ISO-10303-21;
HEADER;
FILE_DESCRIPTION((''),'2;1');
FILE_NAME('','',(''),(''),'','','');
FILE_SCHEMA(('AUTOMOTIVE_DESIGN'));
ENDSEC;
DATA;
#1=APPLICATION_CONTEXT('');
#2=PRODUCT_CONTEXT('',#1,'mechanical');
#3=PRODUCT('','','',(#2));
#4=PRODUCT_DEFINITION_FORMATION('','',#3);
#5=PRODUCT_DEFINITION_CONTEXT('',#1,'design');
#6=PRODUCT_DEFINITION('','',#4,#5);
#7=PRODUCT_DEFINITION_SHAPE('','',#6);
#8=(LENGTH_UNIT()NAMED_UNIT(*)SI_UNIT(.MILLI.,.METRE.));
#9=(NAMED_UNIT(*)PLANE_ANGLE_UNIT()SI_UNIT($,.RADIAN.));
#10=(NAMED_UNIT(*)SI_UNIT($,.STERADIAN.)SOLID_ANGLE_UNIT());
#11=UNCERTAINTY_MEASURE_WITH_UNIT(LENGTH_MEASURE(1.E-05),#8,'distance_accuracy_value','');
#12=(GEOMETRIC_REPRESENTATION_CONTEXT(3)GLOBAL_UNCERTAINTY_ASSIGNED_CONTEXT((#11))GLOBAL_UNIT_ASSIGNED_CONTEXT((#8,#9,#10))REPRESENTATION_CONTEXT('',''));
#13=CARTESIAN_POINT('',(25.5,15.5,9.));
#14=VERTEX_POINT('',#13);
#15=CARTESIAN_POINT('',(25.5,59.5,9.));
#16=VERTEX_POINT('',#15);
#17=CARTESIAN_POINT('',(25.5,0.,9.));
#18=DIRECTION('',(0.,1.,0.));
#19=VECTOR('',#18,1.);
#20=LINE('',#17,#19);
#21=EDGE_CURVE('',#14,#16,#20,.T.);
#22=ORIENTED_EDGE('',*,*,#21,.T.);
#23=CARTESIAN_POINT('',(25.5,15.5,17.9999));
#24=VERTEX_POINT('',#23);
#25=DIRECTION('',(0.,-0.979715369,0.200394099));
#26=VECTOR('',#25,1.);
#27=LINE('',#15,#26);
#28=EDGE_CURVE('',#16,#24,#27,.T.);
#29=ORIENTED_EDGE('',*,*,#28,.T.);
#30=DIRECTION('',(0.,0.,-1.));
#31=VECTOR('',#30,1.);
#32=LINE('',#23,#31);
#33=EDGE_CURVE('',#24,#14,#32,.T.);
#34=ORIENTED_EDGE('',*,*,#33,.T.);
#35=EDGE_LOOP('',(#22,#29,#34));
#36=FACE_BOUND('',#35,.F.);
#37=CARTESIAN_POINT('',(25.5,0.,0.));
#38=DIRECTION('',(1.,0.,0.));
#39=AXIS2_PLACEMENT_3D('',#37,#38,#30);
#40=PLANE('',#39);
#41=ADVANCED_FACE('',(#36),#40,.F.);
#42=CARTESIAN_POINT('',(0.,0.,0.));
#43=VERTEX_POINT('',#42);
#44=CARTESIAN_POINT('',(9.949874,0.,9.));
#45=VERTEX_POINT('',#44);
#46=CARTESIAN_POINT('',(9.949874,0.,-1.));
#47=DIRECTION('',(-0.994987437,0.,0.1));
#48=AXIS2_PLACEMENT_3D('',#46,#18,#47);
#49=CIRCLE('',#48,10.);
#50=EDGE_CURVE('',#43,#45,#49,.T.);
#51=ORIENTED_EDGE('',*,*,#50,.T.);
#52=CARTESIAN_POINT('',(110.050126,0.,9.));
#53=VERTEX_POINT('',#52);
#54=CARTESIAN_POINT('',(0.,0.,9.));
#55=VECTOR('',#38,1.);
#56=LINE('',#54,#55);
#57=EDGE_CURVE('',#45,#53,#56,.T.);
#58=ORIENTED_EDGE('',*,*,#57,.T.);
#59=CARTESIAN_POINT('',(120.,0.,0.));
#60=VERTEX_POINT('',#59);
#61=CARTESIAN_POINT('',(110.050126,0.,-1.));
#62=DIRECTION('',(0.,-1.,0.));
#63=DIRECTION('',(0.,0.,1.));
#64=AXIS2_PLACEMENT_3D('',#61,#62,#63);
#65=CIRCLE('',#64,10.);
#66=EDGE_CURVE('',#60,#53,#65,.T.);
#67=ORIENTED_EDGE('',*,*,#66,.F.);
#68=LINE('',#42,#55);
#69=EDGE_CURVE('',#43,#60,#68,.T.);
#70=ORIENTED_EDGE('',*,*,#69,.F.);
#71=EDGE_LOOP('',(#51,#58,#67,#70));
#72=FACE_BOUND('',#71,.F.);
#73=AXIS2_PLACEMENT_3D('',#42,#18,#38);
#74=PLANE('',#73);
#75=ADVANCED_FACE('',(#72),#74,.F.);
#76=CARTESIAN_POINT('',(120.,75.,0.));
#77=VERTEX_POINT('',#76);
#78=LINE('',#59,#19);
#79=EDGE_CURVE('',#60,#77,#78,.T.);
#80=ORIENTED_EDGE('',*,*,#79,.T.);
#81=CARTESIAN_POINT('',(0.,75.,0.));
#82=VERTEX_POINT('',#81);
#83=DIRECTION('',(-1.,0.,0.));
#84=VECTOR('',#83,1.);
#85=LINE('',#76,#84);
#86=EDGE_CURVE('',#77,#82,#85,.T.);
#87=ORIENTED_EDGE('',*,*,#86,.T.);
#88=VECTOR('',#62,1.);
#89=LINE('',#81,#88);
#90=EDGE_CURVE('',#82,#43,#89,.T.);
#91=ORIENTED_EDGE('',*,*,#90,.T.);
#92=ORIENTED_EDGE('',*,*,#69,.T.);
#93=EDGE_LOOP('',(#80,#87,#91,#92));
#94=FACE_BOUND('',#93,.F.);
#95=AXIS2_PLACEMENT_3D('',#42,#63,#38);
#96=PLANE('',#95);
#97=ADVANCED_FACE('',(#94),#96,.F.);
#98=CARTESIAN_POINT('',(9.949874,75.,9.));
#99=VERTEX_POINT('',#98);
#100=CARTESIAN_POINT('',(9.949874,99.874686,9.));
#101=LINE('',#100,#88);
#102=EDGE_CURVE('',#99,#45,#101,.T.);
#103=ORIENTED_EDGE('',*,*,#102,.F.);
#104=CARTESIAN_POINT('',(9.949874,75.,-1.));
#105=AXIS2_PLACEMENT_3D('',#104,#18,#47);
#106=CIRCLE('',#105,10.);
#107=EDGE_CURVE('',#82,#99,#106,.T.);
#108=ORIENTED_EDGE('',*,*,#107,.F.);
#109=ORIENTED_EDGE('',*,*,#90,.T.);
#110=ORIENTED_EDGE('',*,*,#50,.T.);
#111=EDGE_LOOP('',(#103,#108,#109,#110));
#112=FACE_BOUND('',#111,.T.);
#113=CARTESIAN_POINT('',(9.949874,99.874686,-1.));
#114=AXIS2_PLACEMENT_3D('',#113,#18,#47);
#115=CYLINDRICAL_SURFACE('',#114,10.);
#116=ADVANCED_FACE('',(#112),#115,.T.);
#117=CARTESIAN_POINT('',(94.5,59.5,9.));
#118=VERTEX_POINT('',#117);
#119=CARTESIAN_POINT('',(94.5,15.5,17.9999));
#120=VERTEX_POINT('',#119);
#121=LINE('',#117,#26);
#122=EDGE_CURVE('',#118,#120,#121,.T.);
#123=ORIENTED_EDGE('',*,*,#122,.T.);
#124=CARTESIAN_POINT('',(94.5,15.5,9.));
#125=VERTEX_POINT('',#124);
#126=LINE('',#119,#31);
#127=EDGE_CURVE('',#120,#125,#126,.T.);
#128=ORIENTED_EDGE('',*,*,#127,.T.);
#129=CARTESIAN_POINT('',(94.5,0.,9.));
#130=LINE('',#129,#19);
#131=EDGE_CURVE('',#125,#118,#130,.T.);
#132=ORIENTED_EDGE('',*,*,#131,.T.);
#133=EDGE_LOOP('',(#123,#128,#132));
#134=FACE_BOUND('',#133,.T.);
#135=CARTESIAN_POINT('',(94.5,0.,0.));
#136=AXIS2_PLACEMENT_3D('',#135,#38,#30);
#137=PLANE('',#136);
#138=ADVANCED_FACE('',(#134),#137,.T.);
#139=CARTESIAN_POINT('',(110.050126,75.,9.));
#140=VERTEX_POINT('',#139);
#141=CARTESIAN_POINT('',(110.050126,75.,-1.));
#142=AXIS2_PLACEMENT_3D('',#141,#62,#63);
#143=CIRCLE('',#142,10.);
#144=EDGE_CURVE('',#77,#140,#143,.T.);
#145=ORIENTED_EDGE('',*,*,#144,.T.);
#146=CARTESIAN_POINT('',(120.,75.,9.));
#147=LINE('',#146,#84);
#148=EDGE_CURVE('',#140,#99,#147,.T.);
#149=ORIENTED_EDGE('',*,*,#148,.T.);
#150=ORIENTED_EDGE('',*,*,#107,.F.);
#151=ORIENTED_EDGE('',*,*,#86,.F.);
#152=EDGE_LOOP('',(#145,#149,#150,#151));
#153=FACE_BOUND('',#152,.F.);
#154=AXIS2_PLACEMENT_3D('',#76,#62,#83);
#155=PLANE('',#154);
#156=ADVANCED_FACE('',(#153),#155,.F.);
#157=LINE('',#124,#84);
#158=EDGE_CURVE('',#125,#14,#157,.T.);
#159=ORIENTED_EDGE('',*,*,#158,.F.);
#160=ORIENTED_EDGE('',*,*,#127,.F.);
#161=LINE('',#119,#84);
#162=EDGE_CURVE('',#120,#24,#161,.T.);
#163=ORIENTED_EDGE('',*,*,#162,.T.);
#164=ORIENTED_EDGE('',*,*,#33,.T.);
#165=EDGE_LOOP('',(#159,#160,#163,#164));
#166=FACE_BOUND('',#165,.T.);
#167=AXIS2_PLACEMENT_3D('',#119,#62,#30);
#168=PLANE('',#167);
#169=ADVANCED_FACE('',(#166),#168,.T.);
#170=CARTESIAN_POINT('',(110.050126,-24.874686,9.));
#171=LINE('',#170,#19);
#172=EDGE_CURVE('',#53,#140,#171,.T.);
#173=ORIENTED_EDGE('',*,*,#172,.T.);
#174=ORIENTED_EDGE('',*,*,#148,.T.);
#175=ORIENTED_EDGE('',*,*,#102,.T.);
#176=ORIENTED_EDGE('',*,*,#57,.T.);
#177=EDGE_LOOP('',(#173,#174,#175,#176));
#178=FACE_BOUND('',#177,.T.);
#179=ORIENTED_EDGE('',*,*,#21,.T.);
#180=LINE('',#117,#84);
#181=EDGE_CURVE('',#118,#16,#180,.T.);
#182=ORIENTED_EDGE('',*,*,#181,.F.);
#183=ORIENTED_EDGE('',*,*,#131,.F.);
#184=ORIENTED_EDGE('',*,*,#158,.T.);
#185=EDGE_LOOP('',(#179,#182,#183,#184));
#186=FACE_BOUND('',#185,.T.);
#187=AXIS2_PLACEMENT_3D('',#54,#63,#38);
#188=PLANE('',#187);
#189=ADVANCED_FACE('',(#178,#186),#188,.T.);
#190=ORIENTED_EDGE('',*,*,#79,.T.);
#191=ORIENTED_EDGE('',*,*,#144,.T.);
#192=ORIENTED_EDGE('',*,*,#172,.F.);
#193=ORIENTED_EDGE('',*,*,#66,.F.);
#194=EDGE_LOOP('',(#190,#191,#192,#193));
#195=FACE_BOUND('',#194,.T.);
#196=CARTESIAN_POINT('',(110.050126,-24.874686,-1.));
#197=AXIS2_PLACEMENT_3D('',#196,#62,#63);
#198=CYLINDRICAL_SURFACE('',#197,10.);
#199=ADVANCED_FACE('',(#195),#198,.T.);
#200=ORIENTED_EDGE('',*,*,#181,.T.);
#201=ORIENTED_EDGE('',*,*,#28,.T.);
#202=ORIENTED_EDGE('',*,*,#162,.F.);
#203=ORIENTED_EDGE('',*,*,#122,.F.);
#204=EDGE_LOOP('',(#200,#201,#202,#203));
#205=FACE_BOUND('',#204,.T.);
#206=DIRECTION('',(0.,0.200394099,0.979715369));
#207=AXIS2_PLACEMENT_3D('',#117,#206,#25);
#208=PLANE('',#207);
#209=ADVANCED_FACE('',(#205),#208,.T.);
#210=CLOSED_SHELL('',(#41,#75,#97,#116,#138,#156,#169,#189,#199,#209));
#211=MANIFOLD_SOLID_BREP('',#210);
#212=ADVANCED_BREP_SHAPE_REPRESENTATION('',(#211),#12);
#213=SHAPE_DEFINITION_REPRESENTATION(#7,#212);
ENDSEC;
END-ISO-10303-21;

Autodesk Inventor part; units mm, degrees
ref_plane "YZ Plane" through (0, 0, 0) normal (1, 0, 0) x (0, 1, 0)
ref_plane "XZ Plane" through (0, 0, 0) normal (0, 1, 0) x (-1, 0, 0)
sketch "스케치1" plane through (0, 0, 0) normal (0, 0, 1) x (1, 0, 0)
  line L0 (0, 0) -> (120, 0)
  line L1 (120, 0) -> (120, 75)
  line L2 (120, 75) -> (0, 75)
  line L3 (0, 75) -> (0, 0)
  dimension "d0" = 120
  dimension "d1" = 75
extrude "돌출1" add sketch "스케치1" along normal blind 9
sketch "스케치2" plane through (0, 0, 9) normal (0, 0, 1) x (1, 0, 0)
  line L0 (25.5, 59.5) -> (94.5, 59.5)
  line L1 (94.5, 59.5) -> (94.5, 15.5)
  line L2 (94.5, 15.5) -> (25.5, 15.5)
  line L3 (25.5, 15.5) -> (25.5, 59.5)
  line L4 (0, 75) -> (0, 0) projected
  line L5 (0, 0) -> (120, 0) projected
  dimension "d4" = 44
  dimension "d5" = 69
  dimension "d6" = 25.5
  dimension "d7" = 15.5
ref_plane "작업 평면1" through (94.5, 0, 0) normal (1, 0, 0) x (0, 0, -1)
sketch "스케치3" plane through (94.5, 0, 0) normal (1, 0, 0) x (0, 0, -1)
  line L0 (-9, 0) -> (-9, 75) projected
  line L1 (-9, 59.5) -> (-9, 15.5) projected
  line L2 (-9, 59.5) -> (-17.9999, 15.5)
  line L3 (-17.9999, 15.5) -> (-9, 15.5)
  point P0 (0, 0)
  dimension "d9" = 11.56
  dimension "d10" = 90
extrude "돌출2" add sketch "스케치3" against normal blind 69
fillet "모깎기1" radius 10 1 edges at (120, 37.5, 9)
fillet "모깎기2" radius 10 1 edges at (0, 37.5, 9)
properties part number "스위치"
